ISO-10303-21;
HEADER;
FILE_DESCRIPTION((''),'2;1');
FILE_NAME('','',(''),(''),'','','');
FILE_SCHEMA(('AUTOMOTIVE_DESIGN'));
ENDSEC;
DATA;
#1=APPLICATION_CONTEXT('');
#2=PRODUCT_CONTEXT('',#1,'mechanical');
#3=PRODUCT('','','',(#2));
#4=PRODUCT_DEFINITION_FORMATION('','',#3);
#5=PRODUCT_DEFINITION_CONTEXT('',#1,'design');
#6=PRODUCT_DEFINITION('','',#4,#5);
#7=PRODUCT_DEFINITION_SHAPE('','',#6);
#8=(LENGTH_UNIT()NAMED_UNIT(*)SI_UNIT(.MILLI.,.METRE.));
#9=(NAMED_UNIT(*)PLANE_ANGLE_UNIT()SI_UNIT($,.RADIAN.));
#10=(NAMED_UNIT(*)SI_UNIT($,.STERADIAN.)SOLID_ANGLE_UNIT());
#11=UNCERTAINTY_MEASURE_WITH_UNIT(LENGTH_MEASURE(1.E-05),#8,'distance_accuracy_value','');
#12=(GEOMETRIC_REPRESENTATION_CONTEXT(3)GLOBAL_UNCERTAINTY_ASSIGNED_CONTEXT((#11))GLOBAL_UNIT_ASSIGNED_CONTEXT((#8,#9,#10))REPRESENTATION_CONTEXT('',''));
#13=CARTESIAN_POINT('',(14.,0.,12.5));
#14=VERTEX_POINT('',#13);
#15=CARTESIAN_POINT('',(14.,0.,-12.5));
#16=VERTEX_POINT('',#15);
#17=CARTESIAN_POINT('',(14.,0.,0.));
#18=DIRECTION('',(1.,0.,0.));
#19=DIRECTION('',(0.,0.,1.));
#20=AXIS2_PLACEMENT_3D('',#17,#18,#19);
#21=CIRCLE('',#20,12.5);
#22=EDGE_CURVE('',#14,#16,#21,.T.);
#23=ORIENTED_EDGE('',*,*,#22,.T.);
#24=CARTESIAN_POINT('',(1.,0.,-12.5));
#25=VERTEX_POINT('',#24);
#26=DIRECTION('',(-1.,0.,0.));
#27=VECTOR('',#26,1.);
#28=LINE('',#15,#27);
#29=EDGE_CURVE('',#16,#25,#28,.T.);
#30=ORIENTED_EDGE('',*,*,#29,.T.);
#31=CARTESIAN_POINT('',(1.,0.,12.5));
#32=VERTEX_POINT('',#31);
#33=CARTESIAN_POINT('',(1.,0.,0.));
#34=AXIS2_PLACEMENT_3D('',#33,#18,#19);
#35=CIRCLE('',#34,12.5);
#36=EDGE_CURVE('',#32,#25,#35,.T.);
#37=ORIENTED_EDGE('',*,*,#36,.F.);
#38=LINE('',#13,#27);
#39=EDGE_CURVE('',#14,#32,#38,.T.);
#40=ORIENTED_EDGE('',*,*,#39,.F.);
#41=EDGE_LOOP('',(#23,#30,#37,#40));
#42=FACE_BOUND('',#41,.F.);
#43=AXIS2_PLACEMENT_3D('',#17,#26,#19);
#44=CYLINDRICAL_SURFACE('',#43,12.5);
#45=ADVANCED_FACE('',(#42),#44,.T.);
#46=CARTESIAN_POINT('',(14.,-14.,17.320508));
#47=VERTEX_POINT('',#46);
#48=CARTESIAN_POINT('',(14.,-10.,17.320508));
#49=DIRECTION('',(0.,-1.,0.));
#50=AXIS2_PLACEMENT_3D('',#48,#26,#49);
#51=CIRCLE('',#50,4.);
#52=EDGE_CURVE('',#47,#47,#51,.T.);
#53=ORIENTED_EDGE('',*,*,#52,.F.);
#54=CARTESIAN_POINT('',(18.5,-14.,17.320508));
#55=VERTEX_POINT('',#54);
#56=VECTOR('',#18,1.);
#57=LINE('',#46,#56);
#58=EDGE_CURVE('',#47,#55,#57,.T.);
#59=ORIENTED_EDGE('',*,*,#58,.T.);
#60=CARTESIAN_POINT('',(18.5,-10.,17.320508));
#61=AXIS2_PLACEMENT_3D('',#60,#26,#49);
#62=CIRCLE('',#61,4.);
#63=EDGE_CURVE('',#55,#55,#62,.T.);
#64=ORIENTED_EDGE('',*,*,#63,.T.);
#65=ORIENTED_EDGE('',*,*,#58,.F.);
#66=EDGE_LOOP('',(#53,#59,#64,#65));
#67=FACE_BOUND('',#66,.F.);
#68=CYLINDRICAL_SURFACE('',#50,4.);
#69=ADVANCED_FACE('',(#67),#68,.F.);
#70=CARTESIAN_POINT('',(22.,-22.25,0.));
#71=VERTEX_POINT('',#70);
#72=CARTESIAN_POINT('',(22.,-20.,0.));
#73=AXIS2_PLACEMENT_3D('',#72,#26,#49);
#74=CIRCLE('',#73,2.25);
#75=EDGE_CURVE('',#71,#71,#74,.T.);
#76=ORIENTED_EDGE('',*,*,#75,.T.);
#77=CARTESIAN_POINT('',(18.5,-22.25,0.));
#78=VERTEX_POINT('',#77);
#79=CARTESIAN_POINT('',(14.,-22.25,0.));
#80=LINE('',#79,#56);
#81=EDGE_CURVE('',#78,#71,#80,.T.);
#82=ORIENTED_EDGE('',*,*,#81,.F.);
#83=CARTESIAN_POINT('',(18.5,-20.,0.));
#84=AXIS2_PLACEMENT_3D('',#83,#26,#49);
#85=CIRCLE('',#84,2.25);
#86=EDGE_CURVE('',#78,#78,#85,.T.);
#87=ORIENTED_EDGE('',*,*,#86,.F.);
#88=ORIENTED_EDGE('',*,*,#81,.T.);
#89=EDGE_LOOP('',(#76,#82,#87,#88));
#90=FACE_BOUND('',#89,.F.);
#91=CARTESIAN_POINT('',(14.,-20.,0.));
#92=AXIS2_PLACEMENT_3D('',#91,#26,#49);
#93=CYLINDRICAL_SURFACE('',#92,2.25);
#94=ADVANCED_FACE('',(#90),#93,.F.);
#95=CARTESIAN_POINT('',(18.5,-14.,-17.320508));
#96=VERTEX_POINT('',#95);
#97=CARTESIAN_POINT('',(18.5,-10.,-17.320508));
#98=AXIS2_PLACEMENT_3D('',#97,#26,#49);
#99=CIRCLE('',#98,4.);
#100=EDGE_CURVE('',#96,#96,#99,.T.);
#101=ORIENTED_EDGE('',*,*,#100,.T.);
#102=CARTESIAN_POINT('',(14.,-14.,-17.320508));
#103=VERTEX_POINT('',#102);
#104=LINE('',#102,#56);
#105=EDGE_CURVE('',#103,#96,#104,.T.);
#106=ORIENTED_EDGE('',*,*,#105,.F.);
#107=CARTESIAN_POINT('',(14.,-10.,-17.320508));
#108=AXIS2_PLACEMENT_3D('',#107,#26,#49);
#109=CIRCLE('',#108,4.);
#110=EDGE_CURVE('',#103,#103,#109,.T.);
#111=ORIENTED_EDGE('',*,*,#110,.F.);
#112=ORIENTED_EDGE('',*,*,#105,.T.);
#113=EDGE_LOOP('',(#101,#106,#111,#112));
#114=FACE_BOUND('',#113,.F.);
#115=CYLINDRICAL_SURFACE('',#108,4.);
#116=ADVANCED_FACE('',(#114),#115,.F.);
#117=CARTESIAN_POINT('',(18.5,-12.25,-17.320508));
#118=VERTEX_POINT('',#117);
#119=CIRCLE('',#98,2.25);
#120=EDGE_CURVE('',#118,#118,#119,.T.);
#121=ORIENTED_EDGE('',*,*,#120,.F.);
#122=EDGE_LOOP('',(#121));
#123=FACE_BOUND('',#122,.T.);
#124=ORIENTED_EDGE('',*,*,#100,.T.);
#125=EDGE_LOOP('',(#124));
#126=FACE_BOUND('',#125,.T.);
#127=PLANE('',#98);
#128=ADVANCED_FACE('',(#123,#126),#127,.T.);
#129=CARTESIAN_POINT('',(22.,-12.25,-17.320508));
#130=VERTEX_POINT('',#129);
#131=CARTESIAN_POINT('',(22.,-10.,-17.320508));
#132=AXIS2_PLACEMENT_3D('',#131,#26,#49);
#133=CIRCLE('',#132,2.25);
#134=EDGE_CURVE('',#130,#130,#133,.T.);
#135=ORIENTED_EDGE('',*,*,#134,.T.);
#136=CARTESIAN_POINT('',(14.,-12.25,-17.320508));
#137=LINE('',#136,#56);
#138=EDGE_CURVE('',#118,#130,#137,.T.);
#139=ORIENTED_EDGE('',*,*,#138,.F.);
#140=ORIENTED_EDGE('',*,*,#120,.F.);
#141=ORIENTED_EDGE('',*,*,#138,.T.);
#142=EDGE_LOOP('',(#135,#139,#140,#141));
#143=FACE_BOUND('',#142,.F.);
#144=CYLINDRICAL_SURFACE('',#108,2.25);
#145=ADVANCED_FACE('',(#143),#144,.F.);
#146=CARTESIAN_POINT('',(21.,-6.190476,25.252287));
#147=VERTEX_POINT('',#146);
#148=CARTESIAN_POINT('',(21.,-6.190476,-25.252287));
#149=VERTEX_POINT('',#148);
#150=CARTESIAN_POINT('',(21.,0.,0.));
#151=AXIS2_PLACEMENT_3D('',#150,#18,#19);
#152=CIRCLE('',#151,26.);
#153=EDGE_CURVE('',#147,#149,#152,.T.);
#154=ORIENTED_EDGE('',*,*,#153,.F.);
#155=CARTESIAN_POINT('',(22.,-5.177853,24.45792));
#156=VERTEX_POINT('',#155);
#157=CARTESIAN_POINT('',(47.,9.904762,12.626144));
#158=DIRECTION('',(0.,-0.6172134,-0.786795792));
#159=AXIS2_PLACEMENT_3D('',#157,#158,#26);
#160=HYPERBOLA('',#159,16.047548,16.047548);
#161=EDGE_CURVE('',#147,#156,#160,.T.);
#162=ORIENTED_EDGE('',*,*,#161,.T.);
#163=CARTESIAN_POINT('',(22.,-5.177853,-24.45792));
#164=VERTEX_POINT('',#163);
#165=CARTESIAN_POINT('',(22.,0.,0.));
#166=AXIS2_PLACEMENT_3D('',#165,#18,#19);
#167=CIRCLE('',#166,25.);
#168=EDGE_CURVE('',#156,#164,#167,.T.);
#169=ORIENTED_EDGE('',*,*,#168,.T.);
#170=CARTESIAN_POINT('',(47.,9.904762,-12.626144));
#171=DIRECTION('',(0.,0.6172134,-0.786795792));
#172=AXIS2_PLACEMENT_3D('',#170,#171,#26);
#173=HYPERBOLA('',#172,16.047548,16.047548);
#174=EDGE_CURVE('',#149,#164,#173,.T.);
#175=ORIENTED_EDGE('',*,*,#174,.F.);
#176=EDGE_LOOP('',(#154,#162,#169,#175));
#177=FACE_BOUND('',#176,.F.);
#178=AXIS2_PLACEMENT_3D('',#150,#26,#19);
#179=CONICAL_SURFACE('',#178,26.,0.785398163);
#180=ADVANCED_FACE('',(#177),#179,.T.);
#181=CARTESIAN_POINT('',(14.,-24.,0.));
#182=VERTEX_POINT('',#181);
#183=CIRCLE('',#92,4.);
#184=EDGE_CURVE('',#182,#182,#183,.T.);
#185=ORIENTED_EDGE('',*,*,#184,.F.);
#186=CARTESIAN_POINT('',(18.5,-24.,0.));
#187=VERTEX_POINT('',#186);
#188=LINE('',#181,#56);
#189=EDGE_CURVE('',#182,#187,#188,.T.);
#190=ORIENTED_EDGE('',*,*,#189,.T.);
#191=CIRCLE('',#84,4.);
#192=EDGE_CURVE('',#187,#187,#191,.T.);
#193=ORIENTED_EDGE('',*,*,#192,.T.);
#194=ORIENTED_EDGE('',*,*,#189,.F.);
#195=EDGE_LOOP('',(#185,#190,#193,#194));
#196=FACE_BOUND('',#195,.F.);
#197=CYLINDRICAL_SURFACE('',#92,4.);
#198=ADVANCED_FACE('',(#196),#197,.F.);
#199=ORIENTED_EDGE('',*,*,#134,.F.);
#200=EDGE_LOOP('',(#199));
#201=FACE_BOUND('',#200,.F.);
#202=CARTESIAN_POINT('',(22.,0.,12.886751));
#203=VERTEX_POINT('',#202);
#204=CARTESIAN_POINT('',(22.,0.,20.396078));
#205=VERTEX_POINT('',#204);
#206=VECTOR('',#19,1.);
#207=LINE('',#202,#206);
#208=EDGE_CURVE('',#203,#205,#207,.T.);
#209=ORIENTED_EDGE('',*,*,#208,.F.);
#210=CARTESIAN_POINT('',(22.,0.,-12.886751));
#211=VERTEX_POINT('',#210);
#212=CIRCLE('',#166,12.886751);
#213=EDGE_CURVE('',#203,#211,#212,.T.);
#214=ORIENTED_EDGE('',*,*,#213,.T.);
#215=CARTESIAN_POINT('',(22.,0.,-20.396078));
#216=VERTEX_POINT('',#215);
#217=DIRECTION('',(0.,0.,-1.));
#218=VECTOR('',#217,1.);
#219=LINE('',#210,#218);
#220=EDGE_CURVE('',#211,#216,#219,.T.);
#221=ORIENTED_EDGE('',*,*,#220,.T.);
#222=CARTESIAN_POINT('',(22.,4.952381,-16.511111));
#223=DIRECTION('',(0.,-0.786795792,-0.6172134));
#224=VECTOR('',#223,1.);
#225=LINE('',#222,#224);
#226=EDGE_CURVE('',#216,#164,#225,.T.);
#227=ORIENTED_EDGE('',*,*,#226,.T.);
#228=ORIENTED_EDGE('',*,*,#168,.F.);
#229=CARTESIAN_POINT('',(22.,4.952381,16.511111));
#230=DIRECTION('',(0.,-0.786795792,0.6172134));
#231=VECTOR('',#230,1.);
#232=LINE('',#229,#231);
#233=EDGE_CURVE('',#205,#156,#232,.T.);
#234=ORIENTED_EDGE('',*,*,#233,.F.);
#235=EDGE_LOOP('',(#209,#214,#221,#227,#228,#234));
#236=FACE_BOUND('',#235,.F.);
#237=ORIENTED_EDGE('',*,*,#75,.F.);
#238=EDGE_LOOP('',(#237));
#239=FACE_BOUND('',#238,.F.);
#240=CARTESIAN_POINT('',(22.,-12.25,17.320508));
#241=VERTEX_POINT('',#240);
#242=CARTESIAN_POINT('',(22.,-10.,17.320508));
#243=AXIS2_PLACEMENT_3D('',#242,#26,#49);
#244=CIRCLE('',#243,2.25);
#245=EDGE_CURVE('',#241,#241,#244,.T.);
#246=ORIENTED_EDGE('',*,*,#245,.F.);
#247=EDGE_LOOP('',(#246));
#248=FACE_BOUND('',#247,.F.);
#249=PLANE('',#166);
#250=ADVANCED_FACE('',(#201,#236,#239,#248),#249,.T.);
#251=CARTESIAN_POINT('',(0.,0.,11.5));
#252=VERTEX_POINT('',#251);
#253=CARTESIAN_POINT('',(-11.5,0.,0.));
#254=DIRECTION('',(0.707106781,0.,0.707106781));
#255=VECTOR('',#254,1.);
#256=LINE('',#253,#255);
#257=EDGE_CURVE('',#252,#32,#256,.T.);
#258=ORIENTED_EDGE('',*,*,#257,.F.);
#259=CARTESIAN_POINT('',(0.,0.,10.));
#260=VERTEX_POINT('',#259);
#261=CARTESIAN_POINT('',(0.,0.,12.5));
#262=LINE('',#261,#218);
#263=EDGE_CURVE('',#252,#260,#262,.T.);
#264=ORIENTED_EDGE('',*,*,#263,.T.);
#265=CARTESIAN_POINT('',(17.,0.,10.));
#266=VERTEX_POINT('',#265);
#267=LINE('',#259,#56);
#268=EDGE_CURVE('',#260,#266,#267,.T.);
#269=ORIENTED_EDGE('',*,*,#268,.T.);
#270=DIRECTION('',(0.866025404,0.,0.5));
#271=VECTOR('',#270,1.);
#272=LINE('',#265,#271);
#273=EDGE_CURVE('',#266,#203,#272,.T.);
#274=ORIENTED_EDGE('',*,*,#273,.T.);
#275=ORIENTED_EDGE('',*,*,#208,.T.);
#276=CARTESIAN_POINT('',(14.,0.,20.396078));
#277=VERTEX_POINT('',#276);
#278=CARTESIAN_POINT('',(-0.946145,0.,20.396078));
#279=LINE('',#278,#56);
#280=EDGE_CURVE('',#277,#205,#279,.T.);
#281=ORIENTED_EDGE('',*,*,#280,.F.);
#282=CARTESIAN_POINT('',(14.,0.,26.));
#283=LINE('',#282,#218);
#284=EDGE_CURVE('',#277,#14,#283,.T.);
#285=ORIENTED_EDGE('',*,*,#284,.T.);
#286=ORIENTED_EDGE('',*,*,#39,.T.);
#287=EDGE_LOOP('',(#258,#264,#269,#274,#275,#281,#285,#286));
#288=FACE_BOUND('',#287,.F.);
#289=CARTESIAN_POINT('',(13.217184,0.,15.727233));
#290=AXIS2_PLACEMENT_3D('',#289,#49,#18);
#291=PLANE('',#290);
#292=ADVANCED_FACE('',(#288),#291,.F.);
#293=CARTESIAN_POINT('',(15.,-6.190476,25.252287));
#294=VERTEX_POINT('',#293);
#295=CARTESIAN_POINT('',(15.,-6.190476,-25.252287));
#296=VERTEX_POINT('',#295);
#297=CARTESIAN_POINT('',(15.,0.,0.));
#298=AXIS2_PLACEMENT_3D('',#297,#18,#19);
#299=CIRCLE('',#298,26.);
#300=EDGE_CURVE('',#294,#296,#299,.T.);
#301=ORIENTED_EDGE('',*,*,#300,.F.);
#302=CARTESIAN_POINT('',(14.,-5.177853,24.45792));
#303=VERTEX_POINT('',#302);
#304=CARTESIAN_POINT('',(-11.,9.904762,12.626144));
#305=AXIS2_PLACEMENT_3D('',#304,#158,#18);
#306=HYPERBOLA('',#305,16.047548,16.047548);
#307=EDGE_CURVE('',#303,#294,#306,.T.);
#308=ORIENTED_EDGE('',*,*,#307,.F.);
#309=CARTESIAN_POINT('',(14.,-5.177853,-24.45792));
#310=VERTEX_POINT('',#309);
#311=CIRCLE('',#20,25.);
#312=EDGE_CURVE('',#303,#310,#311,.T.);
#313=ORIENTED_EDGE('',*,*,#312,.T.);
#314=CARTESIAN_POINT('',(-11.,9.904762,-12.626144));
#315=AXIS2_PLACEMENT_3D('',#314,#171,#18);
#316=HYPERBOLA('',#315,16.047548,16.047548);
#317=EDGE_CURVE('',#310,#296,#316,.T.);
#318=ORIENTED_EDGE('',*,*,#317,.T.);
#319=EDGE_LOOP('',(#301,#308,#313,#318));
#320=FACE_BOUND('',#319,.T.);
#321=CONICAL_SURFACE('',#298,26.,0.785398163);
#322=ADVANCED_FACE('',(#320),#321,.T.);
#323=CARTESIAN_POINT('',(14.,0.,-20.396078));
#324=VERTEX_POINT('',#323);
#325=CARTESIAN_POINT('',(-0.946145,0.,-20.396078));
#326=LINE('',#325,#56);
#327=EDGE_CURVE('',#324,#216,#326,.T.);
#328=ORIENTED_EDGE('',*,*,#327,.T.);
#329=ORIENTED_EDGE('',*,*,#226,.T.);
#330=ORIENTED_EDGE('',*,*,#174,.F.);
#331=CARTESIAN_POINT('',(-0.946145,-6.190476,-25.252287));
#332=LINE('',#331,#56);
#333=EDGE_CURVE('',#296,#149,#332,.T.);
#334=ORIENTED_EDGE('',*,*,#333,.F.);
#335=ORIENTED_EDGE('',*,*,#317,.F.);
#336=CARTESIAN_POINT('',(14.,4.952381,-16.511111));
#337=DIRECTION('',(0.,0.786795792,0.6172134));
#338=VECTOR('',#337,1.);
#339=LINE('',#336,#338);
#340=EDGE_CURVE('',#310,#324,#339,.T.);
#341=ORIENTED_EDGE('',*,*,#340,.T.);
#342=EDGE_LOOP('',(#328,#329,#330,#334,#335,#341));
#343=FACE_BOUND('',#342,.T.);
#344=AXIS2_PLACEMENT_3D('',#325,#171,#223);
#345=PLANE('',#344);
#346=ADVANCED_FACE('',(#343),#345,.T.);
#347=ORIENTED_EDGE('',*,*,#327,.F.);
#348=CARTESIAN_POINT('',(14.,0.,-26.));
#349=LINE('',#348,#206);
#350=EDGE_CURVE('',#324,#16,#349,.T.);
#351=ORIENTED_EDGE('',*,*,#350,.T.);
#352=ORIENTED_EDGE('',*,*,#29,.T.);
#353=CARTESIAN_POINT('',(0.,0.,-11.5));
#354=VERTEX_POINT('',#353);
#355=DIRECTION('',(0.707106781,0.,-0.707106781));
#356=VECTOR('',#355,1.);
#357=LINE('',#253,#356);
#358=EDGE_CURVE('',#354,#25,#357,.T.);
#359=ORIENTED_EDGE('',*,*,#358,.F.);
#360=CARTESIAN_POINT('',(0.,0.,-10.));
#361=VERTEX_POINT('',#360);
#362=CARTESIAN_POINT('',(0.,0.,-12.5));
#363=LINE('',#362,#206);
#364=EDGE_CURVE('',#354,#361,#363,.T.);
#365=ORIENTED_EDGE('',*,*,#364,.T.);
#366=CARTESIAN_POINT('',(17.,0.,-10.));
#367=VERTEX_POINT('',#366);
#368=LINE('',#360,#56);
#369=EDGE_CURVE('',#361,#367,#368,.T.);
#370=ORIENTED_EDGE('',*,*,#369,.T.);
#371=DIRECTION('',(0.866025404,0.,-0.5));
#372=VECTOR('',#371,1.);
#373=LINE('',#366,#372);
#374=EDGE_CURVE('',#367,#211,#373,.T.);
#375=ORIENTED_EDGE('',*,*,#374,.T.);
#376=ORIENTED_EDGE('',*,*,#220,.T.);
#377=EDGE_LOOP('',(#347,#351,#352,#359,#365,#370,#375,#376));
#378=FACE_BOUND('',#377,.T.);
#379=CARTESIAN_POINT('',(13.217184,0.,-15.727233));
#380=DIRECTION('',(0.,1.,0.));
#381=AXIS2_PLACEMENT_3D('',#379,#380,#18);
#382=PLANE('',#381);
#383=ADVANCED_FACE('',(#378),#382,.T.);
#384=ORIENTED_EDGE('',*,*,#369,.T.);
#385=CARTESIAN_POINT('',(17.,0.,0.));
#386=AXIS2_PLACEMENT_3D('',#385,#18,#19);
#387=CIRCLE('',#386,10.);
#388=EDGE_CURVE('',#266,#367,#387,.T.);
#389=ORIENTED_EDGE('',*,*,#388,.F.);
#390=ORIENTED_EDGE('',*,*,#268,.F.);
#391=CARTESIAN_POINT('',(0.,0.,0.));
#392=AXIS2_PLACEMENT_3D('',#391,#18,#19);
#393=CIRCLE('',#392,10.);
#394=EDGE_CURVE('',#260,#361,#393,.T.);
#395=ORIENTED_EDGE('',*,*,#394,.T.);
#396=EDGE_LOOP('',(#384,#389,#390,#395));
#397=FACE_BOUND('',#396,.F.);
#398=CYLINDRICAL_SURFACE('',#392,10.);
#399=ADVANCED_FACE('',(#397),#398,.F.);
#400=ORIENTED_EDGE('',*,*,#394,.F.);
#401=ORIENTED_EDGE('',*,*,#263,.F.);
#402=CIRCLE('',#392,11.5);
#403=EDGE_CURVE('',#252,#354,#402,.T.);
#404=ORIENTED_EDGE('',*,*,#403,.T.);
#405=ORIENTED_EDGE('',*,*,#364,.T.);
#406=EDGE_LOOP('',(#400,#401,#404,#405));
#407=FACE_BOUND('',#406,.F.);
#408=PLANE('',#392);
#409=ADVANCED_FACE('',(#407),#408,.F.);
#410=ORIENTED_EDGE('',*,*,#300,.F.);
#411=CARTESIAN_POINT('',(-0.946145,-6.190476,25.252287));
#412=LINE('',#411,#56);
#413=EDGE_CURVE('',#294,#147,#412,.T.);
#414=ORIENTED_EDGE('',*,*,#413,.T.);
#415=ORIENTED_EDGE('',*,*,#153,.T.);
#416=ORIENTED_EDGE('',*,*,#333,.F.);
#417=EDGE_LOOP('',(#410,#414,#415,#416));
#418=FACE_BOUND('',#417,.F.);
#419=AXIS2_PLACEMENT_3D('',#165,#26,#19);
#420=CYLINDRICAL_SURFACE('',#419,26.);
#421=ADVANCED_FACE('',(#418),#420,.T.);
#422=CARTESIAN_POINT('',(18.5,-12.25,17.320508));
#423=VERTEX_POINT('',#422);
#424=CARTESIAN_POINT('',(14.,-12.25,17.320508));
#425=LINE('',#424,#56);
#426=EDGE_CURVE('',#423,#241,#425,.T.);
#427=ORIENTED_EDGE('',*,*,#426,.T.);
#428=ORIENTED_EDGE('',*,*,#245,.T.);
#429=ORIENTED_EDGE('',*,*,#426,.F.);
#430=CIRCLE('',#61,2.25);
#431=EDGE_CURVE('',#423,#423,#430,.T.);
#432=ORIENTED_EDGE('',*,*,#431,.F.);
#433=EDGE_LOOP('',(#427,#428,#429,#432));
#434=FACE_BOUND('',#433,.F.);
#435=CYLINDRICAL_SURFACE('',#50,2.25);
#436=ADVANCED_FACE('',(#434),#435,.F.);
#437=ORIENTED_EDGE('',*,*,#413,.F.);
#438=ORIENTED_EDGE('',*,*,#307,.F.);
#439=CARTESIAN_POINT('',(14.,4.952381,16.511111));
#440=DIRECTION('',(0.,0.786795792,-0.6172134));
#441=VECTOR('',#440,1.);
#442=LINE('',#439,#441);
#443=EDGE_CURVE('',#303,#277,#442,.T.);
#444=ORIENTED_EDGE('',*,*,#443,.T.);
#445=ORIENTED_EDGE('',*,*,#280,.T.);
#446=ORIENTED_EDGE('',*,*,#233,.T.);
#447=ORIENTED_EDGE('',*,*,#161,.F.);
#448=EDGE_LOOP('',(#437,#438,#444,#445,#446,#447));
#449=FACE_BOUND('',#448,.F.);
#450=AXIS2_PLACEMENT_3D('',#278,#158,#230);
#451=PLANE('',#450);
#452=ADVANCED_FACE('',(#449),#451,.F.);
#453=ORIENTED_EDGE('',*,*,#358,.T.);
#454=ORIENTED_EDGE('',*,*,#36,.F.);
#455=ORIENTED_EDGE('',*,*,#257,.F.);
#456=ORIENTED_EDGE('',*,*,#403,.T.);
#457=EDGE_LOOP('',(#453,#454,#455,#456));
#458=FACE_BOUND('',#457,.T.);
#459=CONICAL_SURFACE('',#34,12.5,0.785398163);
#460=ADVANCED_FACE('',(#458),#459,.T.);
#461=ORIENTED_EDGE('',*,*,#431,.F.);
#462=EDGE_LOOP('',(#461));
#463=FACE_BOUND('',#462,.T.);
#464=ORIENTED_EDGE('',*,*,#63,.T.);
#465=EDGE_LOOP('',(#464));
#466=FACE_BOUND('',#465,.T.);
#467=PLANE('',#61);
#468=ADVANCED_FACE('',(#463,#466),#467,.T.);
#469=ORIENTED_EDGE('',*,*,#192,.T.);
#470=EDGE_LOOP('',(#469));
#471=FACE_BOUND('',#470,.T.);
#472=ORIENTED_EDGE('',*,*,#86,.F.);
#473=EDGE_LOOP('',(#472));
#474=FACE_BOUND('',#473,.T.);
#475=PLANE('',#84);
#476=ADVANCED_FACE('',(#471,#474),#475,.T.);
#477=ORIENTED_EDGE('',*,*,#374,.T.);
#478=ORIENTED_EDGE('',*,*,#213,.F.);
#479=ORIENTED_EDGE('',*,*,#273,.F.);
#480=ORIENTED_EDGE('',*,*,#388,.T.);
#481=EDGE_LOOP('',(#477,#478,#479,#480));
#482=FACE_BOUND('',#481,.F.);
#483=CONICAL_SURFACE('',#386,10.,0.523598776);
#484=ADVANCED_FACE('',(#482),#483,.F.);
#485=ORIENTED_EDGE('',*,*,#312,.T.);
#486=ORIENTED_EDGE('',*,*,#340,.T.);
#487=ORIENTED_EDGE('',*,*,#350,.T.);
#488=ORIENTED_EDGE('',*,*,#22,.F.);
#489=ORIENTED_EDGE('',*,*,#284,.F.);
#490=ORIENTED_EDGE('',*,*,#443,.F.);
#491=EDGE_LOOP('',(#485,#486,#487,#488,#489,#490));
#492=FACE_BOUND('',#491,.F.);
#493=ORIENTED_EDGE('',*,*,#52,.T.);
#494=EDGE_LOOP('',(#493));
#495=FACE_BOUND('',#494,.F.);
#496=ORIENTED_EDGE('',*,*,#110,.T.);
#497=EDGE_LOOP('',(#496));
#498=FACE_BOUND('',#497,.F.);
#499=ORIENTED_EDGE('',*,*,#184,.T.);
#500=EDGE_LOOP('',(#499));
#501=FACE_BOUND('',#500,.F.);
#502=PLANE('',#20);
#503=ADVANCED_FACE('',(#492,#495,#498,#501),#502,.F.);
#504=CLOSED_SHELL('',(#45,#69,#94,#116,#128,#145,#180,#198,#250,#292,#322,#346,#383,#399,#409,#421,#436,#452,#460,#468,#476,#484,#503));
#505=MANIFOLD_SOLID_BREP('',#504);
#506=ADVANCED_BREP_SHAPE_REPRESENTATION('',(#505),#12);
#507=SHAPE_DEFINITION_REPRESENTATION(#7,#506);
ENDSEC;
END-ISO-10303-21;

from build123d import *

# Parameters (mm, degrees)
F1_ANGLE    = 180
F2_R        = 4
F2_R_2      = 2.25
F3_DEPTH    = 4.5
F4_DEPTH    = 8
F5_SIZE     = 1
F6_T1_DEPTH = 37.8922901759


# Not quite as in the source:
# - a fillet or chamfer that OpenCascade refuses, or shapes differently, is made with other operations: its cross-section is extruded or revolved along the edge and cut away or added


with BuildPart() as f1:
    # F0 (on Front) → F1 (revolve)
    with BuildSketch(Plane.XZ):
        Polygon((0, 12.5), (0, 10), (17, 10), (22, 12.8867513459), (22, 26), (14, 26), (14, 12.5), align=None)
    revolve(axis=Axis((14.5569612949, 0, 0), (1, 0, 0)), revolution_arc=F1_ANGLE)

    # F2 (on face) → F3 (cut)
    with BuildSketch(Plane(origin=(14, 0, 0), x_dir=(0, -1, 0), z_dir=(-1, 0, 0))):
        with Locations((20, 0)):
            Circle(F2_R)
        with Locations((20, 0)):
            Circle(F2_R_2, mode=Mode.SUBTRACT)
        with Locations((10, -17.3205080757)):
            Circle(F2_R)
        with Locations((10, -17.3205080757)):
            Circle(F2_R_2, mode=Mode.SUBTRACT)
        with Locations((10, 17.3205080757)):
            Circle(F2_R)
        with Locations((10, 17.3205080757)):
            Circle(F2_R_2, mode=Mode.SUBTRACT)
    extrude(amount=-F3_DEPTH, mode=Mode.SUBTRACT)

    # F4 (cut): faces of the model
    f4_faces = [f1.faces().sort_by_distance(p)[0] for p in [
        (14, -10, 17.3205080757),
        (14, -20, 0),
        (14, -10, -17.3205080757),
    ]]
    extrude(f4_faces, amount=-F4_DEPTH, mode=Mode.SUBTRACT)

    # F5
    f5_edges = [f1.edges().sort_by_distance(p)[0] for p in [
        (0, -12.5, 0),
        (14, -26, 0),
        (22, -26, 0),
    ]]
    chamfer(f5_edges, length=F5_SIZE)

    # F6: chamfer of 5 on 2 edges, made by hand

    # F6_s2 → F6_t1 (cut)
    with BuildSketch(Plane.YZ.offset(-0.946145088)):
        with BuildLine():
            Line((0, -20.3960780544), (-6.1904761905, -25.2522871149))
            ThreePointArc((-6.1904761905, -25.2522871149), (-3.188239959, -25.8037812338), (0, -26))
            Line((0, -26), (0, -20.3960780544))
        make_face()
        with BuildLine():
            Line((0, 20.3960780544), (-6.1904761905, 25.2522871149))
            ThreePointArc((-6.1904761905, 25.2522871149), (-3.188239959, 25.8037812338), (0, 26))
            Line((0, 26), (0, 20.3960780544))
        make_face()
    extrude(amount=F6_T1_DEPTH, mode=Mode.SUBTRACT)


solid = f1.part
